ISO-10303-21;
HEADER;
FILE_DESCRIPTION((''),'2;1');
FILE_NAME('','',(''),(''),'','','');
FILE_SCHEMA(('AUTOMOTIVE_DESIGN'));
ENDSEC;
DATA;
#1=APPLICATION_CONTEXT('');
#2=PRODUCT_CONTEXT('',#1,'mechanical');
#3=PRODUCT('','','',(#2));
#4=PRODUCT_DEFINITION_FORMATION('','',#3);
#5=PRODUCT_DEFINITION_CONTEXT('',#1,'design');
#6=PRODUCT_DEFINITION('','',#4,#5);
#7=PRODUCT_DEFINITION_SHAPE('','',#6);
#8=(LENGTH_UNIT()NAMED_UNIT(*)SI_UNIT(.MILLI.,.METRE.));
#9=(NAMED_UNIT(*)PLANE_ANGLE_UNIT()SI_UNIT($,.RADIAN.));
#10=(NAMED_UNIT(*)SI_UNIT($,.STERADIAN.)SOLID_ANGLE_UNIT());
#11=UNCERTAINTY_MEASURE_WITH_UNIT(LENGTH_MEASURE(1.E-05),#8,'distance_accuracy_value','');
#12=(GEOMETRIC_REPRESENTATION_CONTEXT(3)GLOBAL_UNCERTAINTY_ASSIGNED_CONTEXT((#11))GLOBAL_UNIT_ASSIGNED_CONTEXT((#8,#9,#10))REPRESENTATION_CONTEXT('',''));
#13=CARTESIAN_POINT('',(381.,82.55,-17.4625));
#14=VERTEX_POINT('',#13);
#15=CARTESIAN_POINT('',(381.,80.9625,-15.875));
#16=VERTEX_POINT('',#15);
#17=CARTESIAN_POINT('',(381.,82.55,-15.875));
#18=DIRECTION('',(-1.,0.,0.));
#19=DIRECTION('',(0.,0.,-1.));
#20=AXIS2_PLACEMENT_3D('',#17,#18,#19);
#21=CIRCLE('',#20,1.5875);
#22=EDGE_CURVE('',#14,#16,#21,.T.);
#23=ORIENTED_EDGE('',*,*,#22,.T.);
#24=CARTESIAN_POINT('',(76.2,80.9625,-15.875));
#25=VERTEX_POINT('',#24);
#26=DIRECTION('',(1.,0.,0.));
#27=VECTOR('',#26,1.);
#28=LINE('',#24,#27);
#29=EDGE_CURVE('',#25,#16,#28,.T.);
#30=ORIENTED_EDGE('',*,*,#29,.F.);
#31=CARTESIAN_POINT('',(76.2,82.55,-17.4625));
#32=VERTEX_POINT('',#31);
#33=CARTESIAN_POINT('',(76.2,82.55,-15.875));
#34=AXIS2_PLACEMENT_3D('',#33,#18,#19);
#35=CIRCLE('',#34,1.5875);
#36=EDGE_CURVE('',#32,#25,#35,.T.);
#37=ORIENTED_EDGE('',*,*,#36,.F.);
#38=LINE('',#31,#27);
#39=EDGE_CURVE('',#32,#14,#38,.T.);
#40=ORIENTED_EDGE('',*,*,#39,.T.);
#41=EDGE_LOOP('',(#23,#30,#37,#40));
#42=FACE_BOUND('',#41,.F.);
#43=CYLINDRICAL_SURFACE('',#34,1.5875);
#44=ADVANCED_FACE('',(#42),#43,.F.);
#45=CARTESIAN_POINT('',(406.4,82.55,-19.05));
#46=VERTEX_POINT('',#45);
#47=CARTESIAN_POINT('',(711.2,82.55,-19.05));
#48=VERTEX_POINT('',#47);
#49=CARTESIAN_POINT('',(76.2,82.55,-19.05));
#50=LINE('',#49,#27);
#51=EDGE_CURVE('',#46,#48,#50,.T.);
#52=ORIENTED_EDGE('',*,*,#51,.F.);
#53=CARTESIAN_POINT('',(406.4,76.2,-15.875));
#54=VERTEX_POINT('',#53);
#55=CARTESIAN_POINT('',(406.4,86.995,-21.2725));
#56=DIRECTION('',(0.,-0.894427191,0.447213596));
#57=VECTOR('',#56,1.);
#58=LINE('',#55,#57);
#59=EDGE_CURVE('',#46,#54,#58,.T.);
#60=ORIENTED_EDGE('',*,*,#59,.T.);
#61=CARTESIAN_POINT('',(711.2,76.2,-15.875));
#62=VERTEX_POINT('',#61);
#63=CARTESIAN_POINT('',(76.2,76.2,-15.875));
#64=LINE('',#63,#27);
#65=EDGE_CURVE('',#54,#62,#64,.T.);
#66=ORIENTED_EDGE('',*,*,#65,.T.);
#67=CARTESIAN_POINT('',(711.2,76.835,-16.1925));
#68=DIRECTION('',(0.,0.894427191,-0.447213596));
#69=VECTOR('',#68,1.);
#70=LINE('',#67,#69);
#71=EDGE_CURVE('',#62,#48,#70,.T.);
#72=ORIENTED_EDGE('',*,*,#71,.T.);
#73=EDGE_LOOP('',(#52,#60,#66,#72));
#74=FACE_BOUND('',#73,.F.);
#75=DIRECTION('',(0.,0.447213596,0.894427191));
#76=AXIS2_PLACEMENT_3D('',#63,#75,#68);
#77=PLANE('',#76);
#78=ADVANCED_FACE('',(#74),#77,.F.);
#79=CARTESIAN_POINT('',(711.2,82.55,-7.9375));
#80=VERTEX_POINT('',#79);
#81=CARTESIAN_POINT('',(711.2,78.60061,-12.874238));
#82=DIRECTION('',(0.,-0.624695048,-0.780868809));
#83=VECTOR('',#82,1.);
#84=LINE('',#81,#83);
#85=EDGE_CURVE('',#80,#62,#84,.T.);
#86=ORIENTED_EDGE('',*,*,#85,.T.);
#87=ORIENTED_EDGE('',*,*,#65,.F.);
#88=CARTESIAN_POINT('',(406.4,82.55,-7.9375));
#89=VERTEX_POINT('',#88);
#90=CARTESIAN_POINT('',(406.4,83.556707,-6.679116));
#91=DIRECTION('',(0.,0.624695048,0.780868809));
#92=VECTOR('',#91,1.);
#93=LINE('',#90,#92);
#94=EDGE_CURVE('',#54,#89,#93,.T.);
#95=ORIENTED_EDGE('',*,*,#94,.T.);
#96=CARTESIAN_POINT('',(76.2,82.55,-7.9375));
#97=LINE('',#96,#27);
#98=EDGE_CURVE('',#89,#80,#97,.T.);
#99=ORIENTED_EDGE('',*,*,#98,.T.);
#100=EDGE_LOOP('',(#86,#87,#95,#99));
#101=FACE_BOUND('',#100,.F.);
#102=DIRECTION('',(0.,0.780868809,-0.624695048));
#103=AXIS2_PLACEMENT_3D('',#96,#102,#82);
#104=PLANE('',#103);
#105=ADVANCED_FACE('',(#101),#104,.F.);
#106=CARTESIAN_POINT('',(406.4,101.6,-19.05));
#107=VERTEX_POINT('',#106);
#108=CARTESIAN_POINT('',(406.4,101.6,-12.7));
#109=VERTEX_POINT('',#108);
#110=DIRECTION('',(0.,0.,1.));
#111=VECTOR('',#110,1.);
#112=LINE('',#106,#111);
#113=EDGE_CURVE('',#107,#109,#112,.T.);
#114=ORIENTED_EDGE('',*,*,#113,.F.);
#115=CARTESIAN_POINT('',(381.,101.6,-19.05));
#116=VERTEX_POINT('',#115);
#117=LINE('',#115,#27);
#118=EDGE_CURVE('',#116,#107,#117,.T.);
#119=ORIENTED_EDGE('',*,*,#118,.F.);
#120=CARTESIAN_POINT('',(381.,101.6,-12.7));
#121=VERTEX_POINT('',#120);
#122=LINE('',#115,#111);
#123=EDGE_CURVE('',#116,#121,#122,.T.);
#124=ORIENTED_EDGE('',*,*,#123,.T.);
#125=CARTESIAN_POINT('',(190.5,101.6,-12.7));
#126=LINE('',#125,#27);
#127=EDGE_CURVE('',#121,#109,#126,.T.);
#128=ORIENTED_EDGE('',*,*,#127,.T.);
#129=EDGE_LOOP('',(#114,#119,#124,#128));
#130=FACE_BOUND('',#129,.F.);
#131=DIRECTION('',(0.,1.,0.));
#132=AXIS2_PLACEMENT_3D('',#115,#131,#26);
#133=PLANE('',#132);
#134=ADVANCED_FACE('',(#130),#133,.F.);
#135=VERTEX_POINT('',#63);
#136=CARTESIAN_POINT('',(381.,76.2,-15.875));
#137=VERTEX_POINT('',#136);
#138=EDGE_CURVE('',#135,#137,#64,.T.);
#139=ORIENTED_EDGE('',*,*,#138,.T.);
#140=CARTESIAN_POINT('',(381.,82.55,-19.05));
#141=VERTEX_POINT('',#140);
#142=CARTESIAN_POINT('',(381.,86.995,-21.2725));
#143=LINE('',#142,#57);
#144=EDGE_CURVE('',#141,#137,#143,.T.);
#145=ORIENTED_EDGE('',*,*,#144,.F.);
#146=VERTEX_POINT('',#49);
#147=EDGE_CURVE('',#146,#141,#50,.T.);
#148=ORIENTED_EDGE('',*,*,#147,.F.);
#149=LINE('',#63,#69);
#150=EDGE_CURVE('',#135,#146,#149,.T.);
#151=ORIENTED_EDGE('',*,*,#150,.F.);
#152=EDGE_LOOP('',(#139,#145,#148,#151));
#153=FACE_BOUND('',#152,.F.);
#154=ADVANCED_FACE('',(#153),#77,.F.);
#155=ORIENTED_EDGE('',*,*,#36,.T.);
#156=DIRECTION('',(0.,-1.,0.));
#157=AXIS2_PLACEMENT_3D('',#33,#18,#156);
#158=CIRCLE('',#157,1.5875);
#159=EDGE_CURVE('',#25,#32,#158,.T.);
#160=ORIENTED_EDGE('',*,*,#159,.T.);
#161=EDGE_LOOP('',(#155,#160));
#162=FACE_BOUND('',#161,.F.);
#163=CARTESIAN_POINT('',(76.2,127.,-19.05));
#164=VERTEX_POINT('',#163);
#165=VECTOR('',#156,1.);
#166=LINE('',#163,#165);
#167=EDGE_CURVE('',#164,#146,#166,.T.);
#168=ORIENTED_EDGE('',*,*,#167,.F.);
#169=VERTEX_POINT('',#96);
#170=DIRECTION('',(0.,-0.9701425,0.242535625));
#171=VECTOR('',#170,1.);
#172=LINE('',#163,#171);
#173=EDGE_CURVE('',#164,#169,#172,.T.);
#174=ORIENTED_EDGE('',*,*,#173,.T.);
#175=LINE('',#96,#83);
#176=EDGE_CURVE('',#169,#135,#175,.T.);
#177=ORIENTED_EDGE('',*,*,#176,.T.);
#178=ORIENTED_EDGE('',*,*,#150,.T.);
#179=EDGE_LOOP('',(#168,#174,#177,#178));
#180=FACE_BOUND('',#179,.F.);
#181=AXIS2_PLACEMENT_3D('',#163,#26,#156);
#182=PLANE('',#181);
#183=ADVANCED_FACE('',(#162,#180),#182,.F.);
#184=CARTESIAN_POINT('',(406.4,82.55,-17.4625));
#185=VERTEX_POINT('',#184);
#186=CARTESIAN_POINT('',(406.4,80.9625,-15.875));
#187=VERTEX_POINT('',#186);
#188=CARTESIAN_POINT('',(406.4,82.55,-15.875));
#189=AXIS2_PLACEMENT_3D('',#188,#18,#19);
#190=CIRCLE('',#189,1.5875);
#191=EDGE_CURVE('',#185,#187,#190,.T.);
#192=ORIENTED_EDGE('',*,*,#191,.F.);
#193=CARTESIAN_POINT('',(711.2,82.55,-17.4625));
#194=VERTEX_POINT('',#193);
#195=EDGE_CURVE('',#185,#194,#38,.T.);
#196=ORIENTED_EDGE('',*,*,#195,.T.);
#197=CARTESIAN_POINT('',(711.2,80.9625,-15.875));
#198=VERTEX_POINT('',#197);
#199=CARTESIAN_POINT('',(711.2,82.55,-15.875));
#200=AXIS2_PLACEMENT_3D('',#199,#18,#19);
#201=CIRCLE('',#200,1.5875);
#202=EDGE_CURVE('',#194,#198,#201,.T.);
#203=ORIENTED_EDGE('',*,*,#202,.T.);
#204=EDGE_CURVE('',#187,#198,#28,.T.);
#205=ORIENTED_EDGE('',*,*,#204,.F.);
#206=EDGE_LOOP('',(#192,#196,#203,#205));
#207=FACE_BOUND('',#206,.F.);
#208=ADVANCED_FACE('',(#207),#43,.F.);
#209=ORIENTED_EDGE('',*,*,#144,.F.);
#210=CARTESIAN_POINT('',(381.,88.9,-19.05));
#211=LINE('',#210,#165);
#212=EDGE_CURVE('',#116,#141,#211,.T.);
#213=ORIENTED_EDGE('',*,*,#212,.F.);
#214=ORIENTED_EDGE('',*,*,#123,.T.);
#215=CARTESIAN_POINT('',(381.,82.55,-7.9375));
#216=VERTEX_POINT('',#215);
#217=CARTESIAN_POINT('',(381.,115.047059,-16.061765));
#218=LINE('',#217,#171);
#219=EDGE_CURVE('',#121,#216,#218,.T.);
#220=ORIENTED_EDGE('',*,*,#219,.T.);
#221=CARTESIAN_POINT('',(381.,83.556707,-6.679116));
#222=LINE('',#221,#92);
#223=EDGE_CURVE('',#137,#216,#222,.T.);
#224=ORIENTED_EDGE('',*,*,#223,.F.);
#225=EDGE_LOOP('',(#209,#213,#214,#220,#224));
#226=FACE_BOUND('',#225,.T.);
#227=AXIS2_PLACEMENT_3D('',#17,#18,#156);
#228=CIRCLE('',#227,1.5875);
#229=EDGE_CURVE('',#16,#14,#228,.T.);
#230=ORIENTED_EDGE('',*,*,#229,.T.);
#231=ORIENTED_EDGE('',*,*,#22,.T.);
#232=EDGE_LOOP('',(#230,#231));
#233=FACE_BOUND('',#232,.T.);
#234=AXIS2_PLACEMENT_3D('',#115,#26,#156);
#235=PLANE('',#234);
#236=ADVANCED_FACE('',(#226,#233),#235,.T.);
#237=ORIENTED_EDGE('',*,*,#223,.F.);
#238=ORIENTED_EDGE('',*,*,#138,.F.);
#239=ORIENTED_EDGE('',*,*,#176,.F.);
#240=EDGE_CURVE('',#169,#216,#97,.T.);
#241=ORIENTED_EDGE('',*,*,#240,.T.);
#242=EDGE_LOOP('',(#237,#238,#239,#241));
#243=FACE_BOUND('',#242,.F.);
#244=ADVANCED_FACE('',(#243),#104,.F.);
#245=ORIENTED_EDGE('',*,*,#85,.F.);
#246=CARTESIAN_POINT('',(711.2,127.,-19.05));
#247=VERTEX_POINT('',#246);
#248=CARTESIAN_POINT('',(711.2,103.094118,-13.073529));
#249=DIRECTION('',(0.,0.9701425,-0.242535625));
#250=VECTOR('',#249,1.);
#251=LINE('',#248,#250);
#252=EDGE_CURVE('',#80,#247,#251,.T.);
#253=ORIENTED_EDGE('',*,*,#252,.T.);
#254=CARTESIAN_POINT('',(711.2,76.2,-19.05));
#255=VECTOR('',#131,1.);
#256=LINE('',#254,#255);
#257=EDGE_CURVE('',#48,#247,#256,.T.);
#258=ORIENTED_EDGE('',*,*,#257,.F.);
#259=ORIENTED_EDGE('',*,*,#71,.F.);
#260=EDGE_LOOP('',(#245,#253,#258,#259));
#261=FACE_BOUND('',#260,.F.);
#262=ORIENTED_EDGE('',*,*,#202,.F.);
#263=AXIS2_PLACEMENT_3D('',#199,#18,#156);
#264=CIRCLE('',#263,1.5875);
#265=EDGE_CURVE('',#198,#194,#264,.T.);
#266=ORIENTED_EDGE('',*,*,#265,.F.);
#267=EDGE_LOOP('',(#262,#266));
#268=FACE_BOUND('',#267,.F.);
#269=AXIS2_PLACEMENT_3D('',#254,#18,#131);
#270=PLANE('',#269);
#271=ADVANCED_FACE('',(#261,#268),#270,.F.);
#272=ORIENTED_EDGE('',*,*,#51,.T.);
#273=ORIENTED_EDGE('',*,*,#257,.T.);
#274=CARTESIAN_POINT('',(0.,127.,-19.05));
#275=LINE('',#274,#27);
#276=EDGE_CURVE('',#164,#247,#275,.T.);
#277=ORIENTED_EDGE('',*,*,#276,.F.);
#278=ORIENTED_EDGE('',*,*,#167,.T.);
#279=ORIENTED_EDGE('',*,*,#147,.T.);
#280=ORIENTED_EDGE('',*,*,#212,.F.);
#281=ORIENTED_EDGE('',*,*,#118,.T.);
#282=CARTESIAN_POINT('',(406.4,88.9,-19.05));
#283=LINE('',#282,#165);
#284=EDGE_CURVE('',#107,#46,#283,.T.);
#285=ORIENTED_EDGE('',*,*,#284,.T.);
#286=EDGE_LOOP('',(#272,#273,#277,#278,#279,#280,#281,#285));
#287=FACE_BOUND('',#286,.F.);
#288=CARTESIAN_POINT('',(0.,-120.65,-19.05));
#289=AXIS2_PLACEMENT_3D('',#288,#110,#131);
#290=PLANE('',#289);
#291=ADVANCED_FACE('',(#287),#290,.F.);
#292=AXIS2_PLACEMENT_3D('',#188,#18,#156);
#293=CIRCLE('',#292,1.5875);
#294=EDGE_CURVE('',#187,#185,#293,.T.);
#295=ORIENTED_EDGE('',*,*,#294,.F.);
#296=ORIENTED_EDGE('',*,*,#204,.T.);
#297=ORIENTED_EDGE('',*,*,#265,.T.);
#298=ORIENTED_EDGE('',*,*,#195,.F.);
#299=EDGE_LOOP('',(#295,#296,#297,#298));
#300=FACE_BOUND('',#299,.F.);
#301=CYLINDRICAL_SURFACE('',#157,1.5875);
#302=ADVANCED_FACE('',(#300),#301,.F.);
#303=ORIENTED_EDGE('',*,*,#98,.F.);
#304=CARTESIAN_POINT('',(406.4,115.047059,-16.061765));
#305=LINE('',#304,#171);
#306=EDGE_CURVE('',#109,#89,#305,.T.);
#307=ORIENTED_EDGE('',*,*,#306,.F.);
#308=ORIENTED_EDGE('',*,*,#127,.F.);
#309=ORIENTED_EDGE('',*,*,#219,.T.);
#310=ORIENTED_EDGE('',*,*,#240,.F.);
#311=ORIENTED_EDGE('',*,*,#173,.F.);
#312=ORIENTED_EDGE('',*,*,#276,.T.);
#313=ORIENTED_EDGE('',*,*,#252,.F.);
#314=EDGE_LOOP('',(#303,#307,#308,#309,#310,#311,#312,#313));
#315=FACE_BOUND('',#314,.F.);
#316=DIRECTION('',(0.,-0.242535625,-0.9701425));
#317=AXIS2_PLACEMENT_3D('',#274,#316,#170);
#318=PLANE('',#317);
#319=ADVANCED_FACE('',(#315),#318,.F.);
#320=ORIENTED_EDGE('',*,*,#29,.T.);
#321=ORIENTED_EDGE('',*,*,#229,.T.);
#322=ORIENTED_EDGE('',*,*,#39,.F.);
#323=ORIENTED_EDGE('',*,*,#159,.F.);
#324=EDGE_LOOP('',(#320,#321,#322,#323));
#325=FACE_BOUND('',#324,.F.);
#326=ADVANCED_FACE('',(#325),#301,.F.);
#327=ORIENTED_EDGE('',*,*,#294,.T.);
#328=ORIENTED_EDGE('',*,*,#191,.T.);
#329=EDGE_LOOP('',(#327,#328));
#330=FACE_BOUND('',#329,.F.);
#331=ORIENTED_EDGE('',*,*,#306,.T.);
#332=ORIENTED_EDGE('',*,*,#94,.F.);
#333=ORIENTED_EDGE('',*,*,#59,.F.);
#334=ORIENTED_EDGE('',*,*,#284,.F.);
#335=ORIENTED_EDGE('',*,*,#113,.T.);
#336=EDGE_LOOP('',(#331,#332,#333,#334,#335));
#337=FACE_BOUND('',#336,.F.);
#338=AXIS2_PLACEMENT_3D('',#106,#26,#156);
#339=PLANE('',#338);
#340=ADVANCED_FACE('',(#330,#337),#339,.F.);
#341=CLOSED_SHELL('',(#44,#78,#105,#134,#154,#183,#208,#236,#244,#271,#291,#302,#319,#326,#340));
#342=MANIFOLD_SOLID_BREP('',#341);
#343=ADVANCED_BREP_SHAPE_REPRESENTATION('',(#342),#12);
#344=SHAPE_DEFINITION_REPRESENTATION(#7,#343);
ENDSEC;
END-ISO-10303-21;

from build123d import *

# Parameters (mm, degrees)
F1_DEPTH   = 762
F2_W       = 12.7
F2_H       = 25.4
F1_FACE1_W = 762
F1_FACE1_H = 7.0995158286
F3_DEPTH   = 38.101
F5_DEPTH   = 635.001
F7_DEPTH   = 635.001


# Not quite as in the source:
# - a feature names something its author has since deleted; it is built from what else it names


with BuildPart() as f1:
    # F0 (on Right) → F1 (new body)
    with BuildSketch(Plane.YZ):
        Polygon((-76.2, 6.35), (-127, -15.875), (-120.65, -19.05), (127, -19.05), (-25.4, 19.05), align=None)
    extrude(amount=F1_DEPTH)

    # F2 (on face) + F1_face1 (on face) → F3 (cut, through all)
    with BuildSketch(Plane(origin=(0, 0, -19.05), x_dir=(1, 0, 0), z_dir=(0, 0, -1))):
        Polygon((0, 120.65), (0, -127), (76.2, -127), (76.2, -76.2), (381, -76.2), (393.7, -76.2), (406.4, -76.2), (711.2, -76.2), (711.2, -127), (762, -127), (762, 120.65), align=None)
        with Locations((387.35, -88.9)):
            Rectangle(F2_W, F2_H)
        with Locations((400.05, -88.9)):
            Rectangle(F2_W, F2_H)
    with BuildSketch(Plane(origin=(381, -123.825, -17.4625), x_dir=(1, 0, 0), z_dir=(0, -0.4472135955, -0.894427191))):
        Rectangle(F1_FACE1_W, F1_FACE1_H)
    extrude(amount=-F3_DEPTH, dir=(0, 0, -1), mode=Mode.SUBTRACT)

    # F4 (on face) → F5 (cut, through all)
    with BuildSketch(Plane(origin=(76.2, 0, 0), x_dir=(0, -1, 0), z_dir=(-1, 0, 0))):
        Polygon((-76.2, -6.35), (-82.55, -7.9375), (-76.2, -15.875), align=None)
        Polygon((-76.2, -15.875), (-82.55, -19.05), (-76.2, -19.05), align=None)
    extrude(amount=-F5_DEPTH, mode=Mode.SUBTRACT)

    # F6 (on face) → F7 (cut, through all)
    with BuildSketch(Plane(origin=(76.2, 0, 0), x_dir=(0, -1, 0), z_dir=(-1, 0, 0))):
        with BuildLine():
            ThreePointArc((-82.55, -17.4625), (-81.4274679849, -16.9975320151), (-80.9625, -15.875))
            ThreePointArc((-80.9625, -15.875), (-83.6725320151, -14.7524679849), (-82.55, -17.4625))
        make_face()
    extrude(amount=-F7_DEPTH, mode=Mode.SUBTRACT)


solid = f1.part
